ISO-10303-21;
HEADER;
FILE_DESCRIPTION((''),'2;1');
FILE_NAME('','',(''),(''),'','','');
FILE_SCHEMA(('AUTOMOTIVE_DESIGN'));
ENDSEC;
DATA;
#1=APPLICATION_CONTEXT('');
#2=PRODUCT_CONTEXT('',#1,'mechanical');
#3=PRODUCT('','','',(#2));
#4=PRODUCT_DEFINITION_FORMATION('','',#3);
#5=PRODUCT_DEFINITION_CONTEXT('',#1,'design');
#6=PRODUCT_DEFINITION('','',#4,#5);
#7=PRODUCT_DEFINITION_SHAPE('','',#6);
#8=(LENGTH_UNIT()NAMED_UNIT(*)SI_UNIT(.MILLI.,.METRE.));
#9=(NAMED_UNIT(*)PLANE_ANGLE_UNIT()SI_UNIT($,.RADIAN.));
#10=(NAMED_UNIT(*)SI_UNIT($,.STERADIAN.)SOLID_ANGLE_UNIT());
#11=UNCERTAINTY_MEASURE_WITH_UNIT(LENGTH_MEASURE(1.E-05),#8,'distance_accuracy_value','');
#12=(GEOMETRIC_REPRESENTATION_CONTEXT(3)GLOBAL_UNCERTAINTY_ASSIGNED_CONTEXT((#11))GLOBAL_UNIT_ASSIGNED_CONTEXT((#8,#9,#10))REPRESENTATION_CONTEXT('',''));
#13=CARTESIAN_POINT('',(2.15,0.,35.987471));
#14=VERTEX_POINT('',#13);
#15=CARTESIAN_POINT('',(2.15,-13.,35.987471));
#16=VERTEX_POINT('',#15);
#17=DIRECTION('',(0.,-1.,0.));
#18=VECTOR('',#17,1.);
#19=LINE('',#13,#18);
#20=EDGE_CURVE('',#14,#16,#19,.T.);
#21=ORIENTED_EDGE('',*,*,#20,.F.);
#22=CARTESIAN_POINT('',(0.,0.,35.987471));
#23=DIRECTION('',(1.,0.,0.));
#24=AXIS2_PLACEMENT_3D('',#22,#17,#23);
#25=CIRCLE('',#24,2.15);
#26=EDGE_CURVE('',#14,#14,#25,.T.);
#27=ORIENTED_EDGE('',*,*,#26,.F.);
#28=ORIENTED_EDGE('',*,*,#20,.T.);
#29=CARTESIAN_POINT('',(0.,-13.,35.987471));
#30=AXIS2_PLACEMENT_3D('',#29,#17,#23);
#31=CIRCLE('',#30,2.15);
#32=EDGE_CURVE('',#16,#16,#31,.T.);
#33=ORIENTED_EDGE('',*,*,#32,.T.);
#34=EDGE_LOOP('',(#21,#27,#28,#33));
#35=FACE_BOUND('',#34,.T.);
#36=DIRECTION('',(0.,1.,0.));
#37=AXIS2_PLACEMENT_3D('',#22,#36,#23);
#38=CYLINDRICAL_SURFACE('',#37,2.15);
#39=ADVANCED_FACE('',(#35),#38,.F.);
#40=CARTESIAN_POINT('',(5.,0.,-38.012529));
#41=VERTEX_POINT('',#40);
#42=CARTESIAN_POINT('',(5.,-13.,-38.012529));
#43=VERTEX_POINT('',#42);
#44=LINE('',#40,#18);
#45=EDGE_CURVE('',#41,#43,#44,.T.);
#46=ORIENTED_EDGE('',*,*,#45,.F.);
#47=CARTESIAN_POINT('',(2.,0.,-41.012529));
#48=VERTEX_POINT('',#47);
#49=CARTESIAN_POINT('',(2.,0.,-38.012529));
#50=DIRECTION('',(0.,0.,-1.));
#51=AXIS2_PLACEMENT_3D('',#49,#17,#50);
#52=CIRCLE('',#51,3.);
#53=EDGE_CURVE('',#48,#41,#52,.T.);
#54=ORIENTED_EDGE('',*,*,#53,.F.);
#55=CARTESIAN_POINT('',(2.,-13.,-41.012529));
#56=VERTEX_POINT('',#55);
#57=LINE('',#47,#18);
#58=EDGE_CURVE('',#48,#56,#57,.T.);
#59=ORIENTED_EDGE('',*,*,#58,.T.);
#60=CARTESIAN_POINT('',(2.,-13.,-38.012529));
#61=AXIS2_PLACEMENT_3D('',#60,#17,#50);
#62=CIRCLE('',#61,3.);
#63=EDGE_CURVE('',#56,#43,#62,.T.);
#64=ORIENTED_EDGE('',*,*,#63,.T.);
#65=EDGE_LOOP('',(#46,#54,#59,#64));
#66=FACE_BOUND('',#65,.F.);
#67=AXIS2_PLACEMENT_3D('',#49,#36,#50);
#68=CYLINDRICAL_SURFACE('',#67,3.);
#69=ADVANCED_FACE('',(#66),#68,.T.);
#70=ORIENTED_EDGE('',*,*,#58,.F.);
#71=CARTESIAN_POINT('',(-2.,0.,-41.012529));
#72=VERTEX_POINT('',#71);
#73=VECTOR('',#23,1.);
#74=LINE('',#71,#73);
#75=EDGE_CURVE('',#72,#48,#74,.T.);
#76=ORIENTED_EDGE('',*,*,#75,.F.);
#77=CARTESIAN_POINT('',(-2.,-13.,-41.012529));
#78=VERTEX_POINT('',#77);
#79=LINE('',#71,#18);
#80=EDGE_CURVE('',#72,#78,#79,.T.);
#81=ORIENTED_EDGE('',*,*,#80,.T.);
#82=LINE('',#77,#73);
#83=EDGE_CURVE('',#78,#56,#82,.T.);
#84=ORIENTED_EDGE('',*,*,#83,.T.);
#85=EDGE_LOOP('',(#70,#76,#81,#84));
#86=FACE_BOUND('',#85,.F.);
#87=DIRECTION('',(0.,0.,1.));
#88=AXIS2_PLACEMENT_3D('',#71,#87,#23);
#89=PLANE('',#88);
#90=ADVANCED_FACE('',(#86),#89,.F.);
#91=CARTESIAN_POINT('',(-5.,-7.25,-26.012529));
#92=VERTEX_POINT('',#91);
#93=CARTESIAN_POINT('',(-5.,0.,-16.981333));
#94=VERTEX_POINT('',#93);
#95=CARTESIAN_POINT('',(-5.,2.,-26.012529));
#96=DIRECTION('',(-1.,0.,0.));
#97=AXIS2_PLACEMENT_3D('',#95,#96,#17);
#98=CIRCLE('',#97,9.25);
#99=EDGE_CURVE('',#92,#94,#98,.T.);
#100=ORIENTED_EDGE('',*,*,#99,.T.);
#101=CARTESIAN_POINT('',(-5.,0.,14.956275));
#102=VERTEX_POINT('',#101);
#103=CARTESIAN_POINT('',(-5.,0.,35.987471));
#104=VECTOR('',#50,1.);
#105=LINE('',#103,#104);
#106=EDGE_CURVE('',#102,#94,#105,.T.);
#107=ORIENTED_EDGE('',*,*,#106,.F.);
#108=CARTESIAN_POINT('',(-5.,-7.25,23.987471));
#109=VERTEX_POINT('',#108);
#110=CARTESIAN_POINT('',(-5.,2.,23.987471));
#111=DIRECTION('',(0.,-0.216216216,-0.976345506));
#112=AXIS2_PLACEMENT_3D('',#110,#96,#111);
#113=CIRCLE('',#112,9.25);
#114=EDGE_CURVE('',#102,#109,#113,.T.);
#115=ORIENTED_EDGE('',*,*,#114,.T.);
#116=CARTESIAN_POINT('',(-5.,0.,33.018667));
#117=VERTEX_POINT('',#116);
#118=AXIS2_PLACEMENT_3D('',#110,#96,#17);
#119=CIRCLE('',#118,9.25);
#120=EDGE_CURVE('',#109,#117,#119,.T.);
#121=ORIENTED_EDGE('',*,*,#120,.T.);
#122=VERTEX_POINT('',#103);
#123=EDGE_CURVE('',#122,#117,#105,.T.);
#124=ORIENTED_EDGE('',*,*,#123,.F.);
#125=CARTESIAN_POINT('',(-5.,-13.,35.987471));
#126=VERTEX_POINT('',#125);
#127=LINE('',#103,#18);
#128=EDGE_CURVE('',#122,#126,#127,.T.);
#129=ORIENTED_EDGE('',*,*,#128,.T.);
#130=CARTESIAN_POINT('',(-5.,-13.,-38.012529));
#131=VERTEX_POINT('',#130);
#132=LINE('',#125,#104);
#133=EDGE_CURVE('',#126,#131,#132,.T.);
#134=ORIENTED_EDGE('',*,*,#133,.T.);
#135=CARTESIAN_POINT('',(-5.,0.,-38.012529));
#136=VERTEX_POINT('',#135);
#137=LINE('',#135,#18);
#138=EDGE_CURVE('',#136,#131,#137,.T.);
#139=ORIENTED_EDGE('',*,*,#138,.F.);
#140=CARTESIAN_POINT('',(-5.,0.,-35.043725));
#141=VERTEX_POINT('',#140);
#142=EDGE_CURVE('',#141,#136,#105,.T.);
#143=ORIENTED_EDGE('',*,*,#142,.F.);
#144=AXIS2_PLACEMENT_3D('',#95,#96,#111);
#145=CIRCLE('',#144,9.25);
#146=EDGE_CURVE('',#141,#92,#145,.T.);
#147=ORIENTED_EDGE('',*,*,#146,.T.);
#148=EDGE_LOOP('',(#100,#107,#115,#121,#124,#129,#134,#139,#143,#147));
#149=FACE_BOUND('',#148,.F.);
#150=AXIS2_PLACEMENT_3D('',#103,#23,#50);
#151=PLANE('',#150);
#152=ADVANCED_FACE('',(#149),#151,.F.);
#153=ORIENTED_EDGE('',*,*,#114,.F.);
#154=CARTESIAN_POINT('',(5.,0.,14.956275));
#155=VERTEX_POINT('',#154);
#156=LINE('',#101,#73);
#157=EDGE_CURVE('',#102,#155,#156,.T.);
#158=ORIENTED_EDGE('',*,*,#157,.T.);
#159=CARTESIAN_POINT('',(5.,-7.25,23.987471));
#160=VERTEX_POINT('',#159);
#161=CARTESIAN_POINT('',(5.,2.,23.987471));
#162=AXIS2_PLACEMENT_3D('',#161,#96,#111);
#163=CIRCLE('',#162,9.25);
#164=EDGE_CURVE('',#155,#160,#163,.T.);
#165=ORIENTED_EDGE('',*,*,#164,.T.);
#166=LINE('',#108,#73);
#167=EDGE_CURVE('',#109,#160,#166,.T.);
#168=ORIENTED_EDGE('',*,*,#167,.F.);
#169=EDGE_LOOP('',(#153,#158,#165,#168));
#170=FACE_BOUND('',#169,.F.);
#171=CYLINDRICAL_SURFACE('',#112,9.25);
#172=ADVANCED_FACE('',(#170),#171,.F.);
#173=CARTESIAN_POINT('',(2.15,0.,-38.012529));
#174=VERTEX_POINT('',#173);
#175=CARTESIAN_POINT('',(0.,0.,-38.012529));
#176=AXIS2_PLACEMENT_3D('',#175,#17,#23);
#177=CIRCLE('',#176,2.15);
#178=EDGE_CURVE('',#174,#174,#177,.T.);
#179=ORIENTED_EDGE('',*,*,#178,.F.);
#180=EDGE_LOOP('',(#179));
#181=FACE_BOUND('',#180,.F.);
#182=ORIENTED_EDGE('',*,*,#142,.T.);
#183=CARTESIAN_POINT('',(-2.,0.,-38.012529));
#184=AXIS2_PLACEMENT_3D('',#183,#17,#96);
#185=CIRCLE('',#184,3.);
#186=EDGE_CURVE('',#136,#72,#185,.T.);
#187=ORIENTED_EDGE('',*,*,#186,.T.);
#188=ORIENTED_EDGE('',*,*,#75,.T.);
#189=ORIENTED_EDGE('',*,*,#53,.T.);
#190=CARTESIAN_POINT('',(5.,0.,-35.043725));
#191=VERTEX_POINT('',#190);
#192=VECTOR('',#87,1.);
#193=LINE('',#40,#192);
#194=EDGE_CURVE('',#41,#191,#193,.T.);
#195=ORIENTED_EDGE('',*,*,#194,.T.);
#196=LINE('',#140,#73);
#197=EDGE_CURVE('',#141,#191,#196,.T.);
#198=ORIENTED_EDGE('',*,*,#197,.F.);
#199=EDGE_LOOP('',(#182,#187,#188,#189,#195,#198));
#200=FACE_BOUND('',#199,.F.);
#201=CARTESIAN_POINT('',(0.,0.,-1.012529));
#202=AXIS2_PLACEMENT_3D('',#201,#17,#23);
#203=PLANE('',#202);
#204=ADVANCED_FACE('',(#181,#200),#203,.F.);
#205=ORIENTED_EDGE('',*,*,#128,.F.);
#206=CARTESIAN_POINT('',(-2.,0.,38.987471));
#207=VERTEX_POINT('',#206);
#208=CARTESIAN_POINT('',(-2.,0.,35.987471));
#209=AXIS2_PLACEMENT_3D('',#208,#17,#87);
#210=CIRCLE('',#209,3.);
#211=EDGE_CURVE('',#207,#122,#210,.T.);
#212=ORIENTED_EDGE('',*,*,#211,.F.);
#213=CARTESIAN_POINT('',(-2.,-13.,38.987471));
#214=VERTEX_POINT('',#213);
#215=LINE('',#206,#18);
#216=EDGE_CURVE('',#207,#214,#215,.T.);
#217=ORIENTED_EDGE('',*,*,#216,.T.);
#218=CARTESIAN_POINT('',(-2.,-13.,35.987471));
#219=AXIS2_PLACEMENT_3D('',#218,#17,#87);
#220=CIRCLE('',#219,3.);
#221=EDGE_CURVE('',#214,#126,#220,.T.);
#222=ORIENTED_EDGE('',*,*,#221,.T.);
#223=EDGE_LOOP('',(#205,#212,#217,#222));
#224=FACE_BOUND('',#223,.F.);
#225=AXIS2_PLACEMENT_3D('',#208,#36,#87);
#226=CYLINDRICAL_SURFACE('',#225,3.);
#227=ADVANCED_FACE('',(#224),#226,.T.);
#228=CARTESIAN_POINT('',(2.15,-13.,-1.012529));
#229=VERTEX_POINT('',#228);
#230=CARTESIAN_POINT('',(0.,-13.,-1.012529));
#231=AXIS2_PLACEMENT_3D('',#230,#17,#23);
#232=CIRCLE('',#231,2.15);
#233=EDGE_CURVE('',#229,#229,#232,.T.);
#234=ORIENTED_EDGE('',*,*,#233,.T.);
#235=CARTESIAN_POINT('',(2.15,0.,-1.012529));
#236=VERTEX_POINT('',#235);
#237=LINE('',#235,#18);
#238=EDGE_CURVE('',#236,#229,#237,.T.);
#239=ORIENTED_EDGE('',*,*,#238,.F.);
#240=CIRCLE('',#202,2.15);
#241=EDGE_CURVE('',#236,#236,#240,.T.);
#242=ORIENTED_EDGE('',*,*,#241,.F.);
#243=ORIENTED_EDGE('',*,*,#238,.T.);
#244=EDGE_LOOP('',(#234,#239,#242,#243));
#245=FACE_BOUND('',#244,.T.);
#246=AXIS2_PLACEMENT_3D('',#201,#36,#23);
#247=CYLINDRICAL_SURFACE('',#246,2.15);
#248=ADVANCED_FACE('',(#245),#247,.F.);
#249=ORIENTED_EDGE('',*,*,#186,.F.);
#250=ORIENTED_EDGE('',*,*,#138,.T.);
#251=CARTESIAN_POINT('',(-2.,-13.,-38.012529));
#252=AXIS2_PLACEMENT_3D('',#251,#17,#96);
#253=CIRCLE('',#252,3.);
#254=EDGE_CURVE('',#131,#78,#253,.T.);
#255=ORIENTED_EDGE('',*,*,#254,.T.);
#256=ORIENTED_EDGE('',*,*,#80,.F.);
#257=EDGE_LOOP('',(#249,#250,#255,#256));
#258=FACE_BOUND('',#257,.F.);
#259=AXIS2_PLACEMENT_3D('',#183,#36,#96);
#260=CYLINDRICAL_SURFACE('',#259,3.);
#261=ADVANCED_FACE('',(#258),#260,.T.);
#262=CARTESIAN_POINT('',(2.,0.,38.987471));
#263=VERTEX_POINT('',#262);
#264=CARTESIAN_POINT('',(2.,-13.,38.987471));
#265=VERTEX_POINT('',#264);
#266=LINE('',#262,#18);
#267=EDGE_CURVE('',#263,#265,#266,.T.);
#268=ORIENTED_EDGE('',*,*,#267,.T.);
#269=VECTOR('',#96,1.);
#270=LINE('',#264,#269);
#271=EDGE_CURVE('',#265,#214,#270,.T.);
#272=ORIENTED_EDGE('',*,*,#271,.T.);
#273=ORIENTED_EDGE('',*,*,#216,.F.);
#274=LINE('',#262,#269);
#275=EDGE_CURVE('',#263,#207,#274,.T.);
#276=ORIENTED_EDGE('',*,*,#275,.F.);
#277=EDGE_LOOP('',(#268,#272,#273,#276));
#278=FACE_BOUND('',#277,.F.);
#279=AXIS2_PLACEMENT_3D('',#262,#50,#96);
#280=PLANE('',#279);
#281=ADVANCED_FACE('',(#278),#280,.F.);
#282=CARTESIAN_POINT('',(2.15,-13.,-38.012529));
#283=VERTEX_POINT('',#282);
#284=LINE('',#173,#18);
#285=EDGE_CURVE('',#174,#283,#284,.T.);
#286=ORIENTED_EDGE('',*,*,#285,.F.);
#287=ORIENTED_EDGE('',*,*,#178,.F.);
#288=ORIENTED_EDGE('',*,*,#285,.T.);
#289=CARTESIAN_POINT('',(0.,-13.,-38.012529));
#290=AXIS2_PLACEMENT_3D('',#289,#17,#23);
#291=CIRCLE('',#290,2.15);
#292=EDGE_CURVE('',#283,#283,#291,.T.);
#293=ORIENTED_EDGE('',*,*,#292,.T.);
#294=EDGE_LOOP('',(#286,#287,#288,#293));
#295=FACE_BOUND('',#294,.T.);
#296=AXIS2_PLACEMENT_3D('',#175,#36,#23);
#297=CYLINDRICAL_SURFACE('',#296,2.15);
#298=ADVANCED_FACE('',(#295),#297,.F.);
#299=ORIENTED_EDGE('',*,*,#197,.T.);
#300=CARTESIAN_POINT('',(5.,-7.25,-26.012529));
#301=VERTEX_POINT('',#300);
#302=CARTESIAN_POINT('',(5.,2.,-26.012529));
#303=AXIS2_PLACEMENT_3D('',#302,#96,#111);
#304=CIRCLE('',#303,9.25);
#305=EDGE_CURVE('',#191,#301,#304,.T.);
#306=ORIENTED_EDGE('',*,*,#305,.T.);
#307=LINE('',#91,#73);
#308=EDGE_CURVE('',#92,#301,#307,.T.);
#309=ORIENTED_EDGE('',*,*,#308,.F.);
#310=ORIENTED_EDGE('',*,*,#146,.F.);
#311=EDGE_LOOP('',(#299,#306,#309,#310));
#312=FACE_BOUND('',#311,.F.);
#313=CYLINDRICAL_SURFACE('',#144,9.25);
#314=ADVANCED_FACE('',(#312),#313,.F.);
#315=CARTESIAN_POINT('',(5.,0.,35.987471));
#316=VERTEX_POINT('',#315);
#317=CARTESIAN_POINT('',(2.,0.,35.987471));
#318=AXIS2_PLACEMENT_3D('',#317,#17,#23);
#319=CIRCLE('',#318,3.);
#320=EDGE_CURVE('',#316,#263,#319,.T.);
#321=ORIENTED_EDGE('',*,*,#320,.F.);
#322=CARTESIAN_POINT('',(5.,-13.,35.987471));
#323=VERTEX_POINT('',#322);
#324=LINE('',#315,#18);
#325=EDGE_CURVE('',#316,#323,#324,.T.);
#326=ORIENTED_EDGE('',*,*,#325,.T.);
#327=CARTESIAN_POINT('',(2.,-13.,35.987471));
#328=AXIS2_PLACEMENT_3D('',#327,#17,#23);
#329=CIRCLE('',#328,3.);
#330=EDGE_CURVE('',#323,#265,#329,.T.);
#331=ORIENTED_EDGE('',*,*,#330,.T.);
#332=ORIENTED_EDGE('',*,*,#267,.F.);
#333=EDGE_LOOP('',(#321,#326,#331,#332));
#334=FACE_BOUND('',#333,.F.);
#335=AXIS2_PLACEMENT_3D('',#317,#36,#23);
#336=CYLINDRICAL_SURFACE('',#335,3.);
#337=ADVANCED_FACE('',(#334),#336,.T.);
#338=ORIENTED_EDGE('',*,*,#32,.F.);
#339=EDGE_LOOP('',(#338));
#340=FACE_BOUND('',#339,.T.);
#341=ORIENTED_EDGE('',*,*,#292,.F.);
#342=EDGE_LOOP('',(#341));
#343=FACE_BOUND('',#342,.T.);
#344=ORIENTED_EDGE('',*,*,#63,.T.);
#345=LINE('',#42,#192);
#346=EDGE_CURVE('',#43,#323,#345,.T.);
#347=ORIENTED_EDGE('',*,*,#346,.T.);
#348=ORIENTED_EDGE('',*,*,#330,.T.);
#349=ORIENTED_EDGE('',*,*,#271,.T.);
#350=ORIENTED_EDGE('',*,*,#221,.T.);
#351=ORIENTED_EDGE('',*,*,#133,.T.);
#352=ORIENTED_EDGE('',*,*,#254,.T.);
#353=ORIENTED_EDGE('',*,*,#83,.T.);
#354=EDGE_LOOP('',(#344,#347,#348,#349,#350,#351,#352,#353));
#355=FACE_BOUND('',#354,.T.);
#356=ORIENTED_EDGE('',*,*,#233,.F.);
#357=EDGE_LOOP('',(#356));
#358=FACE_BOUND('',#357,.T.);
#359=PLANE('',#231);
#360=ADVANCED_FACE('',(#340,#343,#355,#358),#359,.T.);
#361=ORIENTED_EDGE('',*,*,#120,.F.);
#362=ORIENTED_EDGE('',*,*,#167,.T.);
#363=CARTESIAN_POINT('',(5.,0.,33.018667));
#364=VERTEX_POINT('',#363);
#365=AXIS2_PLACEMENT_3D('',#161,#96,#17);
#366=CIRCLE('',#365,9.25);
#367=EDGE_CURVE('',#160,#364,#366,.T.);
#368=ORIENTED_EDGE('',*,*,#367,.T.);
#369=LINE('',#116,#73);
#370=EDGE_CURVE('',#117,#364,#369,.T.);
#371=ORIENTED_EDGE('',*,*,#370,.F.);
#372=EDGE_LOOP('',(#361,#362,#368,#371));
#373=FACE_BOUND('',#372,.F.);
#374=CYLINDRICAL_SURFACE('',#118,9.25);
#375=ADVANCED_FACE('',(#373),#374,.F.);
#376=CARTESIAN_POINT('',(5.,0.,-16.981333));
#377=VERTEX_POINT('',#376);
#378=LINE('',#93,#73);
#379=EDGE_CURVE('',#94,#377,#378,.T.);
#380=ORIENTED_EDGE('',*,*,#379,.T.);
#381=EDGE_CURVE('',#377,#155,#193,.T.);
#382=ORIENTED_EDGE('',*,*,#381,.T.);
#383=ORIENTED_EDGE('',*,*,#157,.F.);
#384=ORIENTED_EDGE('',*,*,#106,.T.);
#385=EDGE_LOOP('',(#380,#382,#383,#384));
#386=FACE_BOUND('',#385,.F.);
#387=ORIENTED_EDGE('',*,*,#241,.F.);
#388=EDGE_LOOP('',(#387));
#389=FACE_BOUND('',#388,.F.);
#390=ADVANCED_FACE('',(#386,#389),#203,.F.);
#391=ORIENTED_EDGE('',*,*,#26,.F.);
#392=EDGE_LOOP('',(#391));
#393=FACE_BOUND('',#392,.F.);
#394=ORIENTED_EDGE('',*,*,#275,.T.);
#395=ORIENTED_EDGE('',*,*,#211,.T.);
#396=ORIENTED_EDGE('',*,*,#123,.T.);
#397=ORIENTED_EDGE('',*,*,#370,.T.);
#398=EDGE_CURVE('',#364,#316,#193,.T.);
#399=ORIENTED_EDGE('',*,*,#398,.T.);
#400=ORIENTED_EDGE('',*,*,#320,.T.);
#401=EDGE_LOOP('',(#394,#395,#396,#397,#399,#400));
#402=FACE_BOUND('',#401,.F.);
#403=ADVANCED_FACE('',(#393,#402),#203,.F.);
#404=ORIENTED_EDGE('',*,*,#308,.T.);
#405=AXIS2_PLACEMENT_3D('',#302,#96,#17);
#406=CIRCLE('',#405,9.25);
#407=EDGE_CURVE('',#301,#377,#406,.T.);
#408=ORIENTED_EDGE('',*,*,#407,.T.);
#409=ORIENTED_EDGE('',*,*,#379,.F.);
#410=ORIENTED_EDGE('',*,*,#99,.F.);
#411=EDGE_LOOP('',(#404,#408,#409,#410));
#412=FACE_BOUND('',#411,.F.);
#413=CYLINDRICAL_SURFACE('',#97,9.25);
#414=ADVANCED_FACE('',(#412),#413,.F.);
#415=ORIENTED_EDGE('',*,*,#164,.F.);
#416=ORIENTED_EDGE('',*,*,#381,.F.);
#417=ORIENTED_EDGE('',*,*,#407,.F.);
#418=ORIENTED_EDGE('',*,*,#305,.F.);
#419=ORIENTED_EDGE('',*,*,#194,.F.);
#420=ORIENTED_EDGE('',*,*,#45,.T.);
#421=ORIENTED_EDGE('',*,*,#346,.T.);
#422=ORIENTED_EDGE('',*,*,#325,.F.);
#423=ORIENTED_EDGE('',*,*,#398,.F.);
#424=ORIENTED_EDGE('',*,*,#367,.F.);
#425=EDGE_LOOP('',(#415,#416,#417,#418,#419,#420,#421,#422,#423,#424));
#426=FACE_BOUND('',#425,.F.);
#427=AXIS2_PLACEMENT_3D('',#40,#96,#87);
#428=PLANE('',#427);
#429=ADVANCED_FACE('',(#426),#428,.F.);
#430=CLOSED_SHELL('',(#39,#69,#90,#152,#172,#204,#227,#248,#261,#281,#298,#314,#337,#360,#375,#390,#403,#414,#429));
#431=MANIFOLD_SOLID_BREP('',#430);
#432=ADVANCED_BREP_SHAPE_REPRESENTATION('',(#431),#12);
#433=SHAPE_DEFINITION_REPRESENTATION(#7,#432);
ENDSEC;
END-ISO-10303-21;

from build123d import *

# Parameters (mm, degrees)
F0_R     = 2.15
F1_DEPTH = 13
F3_DEPTH = 25


# Not quite as in the source:
# - a feature names something its author has since deleted; it is built from what else it names


with BuildPart() as f1:
    # F0 (on Front) → F1 (new body)
    with BuildSketch(Plane.XZ):
        with BuildLine():
            Line((2, 38.987471127), (-2, 38.987471127))
            ThreePointArc((-2, 38.987471127), (-4.1213203436, 38.1087914705), (-5, 35.987471127))
            Line((-5, 35.987471127), (-5, -38.012528873))
            ThreePointArc((-5, -38.012528873), (-4.1213203436, -40.1338492166), (-2, -41.012528873))
            Line((-2, -41.012528873), (2, -41.012528873))
            ThreePointArc((2, -41.012528873), (4.1213203436, -40.1338492166), (5, -38.012528873))
            Line((5, -38.012528873), (5, 35.987471127))
            ThreePointArc((5, 35.987471127), (4.1213203436, 38.1087914705), (2, 38.987471127))
        make_face()
        with Locations((0, -38.012528873)):
            Circle(F0_R, mode=Mode.SUBTRACT)
        with Locations((0, -1.012528873)):
            Circle(F0_R, mode=Mode.SUBTRACT)
        with Locations((0, 35.987471127)):
            Circle(F0_R, mode=Mode.SUBTRACT)
    extrude(amount=F1_DEPTH)

    # F2 (on face) → F3 (cut)
    with BuildSketch(Plane(origin=(-5, 0, 0), x_dir=(0, -1, 0), z_dir=(-1, 0, 0))):
        with BuildLine():
            ThreePointArc((0, 14.9562751929), (5.2132690231, 18.196853716), (7.25, 23.987471127))
            ThreePointArc((7.25, 23.987471127), (5.2132690231, 29.7780885379), (0, 33.0186670611))
            Line((0, 33.0186670611), (0, 23.987471127))
            Line((0, 23.987471127), (0, 14.9562751929))
        make_face()
        with BuildLine():
            ThreePointArc((7.25, -26.012528873), (5.2132690231, -20.2219114621), (0, -16.9813329389))
            Line((0, -16.9813329389), (0, -35.0437248071))
            ThreePointArc((0, -35.0437248071), (5.2132690231, -31.803146284), (7.25, -26.012528873))
        make_face()
    extrude(amount=-F3_DEPTH, mode=Mode.SUBTRACT)


solid = f1.part
